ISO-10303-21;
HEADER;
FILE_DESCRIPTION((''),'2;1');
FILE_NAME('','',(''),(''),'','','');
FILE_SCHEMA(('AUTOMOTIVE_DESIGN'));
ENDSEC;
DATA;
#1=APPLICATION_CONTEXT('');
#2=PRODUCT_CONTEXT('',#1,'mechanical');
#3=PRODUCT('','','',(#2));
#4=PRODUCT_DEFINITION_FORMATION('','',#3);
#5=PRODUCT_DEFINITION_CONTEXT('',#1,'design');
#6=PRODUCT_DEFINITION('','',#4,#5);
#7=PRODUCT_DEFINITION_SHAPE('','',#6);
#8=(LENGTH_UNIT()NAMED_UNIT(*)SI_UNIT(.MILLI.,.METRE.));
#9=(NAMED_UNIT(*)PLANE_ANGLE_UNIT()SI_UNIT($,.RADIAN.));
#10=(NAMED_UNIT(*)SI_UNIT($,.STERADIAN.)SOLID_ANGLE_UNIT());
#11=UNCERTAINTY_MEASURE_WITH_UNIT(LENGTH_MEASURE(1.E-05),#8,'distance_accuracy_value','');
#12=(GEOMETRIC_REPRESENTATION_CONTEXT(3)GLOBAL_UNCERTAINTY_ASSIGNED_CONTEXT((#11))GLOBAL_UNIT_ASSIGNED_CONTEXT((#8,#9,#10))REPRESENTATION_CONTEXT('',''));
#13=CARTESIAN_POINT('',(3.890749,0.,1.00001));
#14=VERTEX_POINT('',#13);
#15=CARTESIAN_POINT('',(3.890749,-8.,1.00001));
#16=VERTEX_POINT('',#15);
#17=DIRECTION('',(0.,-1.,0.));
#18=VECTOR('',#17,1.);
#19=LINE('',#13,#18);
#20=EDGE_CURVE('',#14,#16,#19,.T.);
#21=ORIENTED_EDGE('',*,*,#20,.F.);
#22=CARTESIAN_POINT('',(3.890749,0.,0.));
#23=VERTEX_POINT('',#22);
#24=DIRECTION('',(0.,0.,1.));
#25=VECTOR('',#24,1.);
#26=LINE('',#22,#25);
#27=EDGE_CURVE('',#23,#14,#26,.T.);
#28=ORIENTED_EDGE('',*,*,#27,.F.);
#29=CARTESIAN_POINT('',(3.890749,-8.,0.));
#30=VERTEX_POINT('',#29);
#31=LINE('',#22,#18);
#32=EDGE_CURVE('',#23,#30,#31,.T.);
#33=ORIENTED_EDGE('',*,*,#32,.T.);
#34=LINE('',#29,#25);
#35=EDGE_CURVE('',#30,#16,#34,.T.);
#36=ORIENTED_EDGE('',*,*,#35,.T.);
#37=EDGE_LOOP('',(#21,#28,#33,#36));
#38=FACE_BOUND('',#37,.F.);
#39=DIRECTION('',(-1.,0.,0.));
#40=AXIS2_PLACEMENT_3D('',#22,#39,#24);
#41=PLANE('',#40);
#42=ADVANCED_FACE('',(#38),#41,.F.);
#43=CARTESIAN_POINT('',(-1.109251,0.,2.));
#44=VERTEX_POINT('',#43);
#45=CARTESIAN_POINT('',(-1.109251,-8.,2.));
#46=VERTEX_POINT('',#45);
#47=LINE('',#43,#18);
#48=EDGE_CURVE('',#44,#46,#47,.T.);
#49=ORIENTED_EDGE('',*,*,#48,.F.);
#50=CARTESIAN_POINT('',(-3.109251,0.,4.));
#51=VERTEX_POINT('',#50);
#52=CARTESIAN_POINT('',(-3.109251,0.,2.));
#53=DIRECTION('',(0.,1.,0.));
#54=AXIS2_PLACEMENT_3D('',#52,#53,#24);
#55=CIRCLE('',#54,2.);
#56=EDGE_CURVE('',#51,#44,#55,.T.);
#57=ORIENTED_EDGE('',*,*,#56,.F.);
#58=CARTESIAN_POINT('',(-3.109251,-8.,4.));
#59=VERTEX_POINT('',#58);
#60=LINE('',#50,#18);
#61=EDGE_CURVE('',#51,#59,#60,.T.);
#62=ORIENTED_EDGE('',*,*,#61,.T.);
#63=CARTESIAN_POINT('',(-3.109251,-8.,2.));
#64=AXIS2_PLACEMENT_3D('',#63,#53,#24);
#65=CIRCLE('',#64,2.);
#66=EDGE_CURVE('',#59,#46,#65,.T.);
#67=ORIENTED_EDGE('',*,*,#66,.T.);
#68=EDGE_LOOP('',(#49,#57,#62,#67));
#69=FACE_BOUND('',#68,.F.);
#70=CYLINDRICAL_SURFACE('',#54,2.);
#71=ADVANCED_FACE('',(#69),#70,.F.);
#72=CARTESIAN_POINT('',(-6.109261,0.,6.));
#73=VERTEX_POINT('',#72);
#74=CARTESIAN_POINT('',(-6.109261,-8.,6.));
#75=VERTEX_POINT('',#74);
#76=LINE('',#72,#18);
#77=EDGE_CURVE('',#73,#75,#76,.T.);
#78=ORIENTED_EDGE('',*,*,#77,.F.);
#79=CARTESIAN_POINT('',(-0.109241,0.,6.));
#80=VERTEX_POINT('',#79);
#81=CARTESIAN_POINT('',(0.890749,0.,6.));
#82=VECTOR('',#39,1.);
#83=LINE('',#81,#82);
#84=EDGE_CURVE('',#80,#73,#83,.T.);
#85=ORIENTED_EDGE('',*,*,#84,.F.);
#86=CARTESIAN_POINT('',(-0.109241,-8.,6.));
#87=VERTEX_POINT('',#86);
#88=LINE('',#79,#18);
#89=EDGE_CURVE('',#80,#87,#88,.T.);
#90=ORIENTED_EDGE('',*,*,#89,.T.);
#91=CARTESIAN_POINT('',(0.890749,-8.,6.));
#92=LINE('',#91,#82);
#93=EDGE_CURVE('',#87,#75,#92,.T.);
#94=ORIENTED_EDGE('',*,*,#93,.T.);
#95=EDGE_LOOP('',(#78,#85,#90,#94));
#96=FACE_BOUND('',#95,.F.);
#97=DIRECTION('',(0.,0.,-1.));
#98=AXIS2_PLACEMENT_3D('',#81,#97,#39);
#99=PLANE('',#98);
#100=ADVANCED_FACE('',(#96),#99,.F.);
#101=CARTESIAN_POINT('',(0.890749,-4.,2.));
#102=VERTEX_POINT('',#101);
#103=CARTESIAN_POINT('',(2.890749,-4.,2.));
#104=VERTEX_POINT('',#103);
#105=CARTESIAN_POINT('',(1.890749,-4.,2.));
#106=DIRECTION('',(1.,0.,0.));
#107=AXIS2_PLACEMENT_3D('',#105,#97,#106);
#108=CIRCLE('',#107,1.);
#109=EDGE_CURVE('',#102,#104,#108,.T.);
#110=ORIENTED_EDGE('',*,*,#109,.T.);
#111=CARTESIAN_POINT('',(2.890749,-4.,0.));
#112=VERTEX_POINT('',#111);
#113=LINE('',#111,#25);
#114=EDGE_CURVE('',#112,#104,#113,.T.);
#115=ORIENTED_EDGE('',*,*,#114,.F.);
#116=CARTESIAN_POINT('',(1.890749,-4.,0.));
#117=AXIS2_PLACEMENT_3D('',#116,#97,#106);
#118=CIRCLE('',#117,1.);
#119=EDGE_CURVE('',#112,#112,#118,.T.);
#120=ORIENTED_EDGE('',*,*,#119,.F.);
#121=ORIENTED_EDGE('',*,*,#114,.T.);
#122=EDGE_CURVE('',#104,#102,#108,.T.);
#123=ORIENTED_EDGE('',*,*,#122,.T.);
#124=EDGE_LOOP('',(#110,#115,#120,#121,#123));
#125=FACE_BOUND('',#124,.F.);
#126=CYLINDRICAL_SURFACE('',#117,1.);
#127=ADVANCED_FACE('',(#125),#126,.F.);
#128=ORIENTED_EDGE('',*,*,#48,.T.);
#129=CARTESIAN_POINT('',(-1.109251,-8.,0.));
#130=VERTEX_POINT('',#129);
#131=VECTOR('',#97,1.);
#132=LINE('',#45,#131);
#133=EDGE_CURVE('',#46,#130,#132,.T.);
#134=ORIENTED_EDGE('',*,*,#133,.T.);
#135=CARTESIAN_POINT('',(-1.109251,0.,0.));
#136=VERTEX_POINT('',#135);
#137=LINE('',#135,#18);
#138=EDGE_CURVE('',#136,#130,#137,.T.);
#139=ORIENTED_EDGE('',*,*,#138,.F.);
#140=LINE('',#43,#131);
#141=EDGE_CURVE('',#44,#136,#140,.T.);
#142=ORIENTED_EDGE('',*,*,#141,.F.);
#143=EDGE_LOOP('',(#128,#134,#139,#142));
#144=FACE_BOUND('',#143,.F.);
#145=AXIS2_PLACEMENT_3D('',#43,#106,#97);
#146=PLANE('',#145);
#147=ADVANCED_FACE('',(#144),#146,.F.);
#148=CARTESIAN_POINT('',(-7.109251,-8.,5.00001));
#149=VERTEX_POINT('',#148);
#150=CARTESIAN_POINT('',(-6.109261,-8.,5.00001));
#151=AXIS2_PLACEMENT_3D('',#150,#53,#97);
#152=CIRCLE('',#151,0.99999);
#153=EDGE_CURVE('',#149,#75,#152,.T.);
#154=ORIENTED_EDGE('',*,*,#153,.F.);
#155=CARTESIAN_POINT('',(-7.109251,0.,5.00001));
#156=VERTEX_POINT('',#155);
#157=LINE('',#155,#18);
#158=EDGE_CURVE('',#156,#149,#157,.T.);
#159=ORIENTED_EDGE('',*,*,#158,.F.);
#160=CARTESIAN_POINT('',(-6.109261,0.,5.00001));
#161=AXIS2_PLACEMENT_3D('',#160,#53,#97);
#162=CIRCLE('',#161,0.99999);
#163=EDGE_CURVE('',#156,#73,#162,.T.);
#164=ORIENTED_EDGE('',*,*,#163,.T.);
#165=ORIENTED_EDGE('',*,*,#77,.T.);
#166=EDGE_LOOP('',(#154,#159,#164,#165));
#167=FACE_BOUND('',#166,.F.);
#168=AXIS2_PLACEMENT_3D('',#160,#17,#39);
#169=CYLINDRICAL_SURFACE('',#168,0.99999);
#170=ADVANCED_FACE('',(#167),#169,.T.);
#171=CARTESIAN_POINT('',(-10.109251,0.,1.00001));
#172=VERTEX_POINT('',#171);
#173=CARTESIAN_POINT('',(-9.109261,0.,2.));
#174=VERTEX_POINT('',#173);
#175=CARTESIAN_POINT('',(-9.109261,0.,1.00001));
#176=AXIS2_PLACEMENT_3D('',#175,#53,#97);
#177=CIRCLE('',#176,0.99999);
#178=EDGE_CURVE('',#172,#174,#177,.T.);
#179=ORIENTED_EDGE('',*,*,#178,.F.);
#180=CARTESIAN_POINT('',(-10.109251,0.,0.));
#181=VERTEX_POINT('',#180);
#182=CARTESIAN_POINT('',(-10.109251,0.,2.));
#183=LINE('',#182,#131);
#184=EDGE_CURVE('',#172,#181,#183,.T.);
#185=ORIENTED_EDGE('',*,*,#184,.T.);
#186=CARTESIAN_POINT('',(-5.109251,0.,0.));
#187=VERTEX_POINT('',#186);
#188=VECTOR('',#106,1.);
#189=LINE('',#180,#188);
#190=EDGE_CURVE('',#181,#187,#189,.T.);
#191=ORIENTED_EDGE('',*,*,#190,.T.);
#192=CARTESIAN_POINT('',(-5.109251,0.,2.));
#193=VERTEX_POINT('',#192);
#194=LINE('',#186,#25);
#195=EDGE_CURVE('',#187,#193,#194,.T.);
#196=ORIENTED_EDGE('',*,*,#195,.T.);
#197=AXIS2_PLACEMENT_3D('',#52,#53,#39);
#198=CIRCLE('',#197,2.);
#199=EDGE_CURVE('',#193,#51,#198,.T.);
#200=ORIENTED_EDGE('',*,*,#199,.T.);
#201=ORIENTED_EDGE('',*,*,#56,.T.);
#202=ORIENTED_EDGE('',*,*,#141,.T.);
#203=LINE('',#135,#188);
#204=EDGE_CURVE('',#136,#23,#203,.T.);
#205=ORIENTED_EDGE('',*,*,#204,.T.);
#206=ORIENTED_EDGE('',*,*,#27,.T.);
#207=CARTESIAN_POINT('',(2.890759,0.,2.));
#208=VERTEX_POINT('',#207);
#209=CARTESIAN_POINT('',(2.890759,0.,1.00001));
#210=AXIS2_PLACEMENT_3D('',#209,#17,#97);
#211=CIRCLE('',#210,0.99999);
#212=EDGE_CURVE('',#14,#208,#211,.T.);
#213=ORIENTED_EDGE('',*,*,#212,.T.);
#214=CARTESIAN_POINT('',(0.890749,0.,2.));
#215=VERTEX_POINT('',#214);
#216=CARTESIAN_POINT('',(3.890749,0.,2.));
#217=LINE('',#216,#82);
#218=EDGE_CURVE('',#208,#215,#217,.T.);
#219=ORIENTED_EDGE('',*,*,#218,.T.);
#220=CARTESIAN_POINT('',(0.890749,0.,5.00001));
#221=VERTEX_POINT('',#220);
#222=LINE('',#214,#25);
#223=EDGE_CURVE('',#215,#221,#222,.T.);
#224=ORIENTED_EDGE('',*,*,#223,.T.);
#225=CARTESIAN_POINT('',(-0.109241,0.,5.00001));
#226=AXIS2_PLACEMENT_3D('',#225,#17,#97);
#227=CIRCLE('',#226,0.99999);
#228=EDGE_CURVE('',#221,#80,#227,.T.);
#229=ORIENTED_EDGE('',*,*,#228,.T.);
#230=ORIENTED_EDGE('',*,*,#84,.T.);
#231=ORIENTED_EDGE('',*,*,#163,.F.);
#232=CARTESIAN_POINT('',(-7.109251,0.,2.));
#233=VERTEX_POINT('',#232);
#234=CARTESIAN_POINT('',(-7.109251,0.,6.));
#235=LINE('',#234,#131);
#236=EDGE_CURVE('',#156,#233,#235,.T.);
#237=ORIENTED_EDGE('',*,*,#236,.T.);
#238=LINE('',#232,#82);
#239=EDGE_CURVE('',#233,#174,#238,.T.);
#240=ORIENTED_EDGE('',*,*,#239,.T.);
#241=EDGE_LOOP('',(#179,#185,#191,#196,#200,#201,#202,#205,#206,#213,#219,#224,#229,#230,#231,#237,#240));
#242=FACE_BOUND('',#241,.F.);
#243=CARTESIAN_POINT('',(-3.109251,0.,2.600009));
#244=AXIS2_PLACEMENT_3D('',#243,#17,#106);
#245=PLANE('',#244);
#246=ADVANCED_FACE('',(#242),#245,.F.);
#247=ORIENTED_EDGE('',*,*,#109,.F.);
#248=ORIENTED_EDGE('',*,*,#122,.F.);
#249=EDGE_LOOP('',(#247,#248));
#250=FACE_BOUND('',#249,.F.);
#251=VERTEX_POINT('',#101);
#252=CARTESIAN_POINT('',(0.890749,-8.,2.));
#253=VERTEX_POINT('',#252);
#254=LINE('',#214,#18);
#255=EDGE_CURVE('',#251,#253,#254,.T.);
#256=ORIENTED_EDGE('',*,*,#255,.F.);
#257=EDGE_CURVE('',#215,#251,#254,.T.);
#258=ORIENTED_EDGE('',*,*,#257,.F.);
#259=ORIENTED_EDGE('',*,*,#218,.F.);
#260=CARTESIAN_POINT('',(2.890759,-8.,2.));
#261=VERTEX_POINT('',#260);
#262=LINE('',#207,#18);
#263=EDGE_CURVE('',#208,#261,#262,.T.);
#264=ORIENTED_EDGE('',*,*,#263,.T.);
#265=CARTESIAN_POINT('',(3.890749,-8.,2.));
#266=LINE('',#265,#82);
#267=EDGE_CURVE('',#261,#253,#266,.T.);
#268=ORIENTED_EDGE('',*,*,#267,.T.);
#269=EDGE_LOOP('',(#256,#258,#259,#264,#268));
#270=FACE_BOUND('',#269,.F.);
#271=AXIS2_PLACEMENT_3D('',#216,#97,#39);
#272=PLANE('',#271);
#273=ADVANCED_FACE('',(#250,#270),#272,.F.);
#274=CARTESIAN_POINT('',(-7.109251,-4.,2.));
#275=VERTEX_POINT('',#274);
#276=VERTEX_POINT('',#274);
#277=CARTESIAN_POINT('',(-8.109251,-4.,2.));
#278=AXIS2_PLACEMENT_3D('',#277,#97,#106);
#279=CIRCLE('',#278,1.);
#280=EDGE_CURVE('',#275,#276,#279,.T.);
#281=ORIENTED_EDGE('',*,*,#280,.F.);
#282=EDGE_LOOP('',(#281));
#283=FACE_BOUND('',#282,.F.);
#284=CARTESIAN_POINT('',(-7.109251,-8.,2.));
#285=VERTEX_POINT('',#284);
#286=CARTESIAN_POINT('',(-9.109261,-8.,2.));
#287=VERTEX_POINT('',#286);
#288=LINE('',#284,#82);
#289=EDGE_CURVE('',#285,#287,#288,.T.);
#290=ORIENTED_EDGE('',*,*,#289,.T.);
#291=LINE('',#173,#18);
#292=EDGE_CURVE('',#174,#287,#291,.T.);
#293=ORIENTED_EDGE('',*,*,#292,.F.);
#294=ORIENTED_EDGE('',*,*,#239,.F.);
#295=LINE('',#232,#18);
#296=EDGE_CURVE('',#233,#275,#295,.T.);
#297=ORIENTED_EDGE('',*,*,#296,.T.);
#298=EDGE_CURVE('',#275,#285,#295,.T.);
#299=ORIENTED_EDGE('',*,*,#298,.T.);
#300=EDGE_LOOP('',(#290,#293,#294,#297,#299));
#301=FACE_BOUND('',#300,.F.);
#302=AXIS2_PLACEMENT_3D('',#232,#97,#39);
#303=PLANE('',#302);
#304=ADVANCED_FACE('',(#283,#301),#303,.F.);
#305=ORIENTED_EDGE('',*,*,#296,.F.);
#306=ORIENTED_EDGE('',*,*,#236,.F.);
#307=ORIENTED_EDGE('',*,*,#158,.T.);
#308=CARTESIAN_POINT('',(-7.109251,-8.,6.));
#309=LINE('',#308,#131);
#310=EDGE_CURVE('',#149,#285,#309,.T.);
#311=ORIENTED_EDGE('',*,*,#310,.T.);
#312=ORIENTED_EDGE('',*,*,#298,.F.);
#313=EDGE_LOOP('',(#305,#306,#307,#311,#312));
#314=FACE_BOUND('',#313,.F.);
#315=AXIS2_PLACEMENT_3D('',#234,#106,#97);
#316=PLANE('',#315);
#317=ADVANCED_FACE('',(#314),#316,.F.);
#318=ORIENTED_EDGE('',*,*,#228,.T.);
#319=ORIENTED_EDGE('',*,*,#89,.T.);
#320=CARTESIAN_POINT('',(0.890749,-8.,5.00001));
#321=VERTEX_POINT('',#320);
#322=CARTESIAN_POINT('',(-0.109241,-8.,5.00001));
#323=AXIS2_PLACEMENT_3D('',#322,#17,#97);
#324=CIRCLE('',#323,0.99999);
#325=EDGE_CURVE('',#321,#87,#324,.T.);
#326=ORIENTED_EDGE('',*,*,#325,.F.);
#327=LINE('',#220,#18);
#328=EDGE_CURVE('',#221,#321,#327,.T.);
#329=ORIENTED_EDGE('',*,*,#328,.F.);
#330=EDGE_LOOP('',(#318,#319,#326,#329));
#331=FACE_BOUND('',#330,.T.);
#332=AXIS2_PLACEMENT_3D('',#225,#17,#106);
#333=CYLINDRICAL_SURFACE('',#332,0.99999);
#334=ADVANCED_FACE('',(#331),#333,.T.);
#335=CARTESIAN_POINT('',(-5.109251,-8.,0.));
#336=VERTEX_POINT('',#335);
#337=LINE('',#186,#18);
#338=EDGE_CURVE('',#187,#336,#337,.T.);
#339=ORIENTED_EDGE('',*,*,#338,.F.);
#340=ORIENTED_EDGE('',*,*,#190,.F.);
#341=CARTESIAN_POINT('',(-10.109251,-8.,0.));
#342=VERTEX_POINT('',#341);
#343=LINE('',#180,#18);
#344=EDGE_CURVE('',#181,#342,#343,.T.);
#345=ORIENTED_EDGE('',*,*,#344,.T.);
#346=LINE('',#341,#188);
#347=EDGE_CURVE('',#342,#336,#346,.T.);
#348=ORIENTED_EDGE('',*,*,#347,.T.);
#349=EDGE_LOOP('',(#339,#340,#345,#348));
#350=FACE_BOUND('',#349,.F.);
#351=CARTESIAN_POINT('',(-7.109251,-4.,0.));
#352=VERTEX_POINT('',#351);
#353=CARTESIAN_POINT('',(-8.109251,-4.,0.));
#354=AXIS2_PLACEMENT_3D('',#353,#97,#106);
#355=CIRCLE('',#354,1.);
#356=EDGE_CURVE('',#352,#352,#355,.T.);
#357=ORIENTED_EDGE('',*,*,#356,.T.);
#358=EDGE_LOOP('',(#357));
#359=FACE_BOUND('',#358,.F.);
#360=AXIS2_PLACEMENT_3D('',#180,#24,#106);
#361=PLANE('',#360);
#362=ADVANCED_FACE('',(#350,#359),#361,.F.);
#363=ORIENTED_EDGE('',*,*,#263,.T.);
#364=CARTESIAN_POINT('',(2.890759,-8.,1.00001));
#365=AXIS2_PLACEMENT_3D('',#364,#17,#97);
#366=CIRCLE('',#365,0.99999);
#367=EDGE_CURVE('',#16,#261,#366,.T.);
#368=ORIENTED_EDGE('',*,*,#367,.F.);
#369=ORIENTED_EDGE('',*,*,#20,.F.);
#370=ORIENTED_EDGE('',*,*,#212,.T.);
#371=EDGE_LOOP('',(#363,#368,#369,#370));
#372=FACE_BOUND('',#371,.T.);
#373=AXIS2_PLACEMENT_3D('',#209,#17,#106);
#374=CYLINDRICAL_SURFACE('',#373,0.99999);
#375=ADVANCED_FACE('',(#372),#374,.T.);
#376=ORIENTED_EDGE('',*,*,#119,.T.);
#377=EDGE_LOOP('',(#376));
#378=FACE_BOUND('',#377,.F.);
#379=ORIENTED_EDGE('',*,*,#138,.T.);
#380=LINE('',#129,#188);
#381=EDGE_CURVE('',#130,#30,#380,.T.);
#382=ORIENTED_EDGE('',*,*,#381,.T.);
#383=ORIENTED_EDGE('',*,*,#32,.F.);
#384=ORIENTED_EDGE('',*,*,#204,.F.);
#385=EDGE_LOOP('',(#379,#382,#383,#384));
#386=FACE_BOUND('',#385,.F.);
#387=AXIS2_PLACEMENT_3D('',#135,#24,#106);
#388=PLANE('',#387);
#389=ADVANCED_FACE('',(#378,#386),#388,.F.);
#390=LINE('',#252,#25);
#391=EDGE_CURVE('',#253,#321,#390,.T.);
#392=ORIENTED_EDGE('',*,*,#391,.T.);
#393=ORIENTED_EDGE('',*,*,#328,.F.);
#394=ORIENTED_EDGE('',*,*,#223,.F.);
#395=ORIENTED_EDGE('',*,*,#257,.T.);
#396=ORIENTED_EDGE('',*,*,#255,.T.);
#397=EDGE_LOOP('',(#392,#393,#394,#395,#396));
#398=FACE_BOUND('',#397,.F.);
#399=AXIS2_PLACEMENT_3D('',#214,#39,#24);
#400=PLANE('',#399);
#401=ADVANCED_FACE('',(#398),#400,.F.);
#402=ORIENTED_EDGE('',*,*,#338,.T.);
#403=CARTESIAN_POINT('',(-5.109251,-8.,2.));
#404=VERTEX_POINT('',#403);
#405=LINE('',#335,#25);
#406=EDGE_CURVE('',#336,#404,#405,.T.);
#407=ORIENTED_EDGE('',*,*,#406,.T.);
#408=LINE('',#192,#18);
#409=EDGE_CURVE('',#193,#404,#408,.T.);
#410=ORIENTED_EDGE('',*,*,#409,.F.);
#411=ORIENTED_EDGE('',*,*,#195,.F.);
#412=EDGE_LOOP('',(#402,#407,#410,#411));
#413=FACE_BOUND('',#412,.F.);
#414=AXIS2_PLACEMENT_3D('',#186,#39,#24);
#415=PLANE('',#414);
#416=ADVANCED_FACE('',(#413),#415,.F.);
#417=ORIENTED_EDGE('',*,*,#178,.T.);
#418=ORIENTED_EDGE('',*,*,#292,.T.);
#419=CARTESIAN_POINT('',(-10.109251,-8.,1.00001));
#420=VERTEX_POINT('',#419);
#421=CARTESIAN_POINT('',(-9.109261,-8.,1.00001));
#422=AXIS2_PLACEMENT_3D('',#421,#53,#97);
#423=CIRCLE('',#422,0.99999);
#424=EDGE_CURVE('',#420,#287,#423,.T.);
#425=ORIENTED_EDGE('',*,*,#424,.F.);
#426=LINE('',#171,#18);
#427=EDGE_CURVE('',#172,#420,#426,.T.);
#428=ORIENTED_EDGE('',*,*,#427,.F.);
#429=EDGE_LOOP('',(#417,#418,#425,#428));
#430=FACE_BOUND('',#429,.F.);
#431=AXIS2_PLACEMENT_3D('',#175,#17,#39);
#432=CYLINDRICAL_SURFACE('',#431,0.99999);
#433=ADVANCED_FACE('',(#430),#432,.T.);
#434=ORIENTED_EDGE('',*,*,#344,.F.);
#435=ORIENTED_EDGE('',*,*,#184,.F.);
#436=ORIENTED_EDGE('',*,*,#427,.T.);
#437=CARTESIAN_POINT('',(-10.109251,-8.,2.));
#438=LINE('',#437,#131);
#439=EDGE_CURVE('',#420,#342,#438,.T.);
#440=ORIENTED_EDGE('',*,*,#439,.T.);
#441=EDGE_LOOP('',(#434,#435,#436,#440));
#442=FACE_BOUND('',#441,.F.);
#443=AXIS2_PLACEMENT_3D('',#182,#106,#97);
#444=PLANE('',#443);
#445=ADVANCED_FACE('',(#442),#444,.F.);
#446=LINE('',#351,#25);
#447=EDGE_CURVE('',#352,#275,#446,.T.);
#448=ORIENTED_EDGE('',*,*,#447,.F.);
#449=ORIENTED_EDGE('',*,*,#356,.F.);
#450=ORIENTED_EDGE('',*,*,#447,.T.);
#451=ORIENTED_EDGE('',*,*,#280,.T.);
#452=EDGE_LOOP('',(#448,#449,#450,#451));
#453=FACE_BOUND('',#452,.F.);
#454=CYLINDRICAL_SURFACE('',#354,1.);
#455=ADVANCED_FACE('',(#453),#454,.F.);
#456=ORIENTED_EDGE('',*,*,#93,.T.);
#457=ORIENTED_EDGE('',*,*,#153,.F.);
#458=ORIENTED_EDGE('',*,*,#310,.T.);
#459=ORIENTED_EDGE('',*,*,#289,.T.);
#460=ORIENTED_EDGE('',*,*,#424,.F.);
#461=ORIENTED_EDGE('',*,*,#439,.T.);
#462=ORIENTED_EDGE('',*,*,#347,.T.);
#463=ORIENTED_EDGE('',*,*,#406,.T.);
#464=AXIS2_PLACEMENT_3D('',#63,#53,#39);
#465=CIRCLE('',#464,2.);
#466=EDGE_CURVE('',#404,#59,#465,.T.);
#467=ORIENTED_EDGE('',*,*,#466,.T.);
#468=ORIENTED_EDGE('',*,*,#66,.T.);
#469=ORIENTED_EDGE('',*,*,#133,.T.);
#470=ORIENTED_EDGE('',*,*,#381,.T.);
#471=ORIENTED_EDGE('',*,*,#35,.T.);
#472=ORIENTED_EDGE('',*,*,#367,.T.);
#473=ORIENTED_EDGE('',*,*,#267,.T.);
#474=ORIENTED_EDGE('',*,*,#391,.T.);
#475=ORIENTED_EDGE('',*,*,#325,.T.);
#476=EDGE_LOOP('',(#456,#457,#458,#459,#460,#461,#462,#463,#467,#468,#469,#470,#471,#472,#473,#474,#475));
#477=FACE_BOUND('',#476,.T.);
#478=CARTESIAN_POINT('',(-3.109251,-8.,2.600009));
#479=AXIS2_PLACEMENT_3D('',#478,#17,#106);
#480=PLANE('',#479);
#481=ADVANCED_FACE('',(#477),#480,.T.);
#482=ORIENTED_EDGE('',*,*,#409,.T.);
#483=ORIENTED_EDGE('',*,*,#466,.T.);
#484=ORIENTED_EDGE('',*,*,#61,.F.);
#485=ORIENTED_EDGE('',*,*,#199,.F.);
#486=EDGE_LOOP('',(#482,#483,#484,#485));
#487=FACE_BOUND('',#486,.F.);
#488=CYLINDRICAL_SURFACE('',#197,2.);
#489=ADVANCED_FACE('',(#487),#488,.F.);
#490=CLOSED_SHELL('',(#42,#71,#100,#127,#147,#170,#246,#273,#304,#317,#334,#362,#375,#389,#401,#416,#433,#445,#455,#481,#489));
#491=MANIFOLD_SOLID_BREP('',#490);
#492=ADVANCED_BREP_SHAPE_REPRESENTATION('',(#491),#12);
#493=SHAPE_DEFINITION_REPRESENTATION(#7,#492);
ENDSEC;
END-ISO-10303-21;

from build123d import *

# Parameters (mm, degrees)
F1_DEPTH = 8
F2_R     = 1
F3_DEPTH = 2
F4_R     = 1
F5_DEPTH = 2
F6_R     = 0.99999


# Not quite as in the source:
# - a fillet or chamfer is up to 0.001 mm smaller than in the source, because OpenCascade refuses the exact size


with BuildPart() as f1:
    # F0 (on Front) → F1 (new body)
    with BuildSketch(Plane.XZ):
        with BuildLine():
            Line((-10.1092506963, 2), (-10.1092506963, 0))
            Line((-10.1092506963, 0), (-5.1092506963, 0))
            Line((-5.1092506963, 0), (-5.1092506963, 2))
            ThreePointArc((-5.1092506963, 2), (-4.5234642587, 3.4142135624), (-3.1092506963, 4))
            ThreePointArc((-3.1092506963, 4), (-1.6950371339, 3.4142135624), (-1.1092506963, 2))
            Line((-1.1092506963, 2), (-1.1092506963, 0))
            Line((-1.1092506963, 0), (3.8907493037, 0))
            Line((3.8907493037, 0), (3.8907493037, 2))
            Line((3.8907493037, 2), (0.8907493037, 2))
            Line((0.8907493037, 2), (0.8907493037, 6))
            Line((0.8907493037, 6), (-7.1092506963, 6))
            Line((-7.1092506963, 6), (-7.1092506963, 2))
            Line((-7.1092506963, 2), (-10.1092506963, 2))
        make_face()
    extrude(amount=F1_DEPTH)

    # F2 (on face) → F3 (cut)
    with BuildSketch(Plane(origin=(0, 0, 0), x_dir=(1, 0, 0), z_dir=(0, 0, -1))):
        with Locations((-8.1092506963, 4)):
            Circle(F2_R)
    extrude(amount=-F3_DEPTH, mode=Mode.SUBTRACT)

    # F4 (on face) → F5 (cut)
    with BuildSketch(Plane(origin=(0, 0, 0), x_dir=(1, 0, 0), z_dir=(0, 0, -1))):
        with Locations((1.8907493037, 4)):
            Circle(F4_R)
    extrude(amount=-F5_DEPTH, mode=Mode.SUBTRACT)

    # F6 (radius 1 in the source; OpenCascade refuses exactly that, so slightly less here)
    f6_edges = [f1.edges().sort_by_distance(p)[0] for p in [
        (-10.109251, -4, 2),
        (-7.109251, -4, 6),
        (0.890749, -4, 6),
        (3.890749, -4, 2),
    ]]
    fillet(f6_edges, radius=F6_R)


solid = f1.part
